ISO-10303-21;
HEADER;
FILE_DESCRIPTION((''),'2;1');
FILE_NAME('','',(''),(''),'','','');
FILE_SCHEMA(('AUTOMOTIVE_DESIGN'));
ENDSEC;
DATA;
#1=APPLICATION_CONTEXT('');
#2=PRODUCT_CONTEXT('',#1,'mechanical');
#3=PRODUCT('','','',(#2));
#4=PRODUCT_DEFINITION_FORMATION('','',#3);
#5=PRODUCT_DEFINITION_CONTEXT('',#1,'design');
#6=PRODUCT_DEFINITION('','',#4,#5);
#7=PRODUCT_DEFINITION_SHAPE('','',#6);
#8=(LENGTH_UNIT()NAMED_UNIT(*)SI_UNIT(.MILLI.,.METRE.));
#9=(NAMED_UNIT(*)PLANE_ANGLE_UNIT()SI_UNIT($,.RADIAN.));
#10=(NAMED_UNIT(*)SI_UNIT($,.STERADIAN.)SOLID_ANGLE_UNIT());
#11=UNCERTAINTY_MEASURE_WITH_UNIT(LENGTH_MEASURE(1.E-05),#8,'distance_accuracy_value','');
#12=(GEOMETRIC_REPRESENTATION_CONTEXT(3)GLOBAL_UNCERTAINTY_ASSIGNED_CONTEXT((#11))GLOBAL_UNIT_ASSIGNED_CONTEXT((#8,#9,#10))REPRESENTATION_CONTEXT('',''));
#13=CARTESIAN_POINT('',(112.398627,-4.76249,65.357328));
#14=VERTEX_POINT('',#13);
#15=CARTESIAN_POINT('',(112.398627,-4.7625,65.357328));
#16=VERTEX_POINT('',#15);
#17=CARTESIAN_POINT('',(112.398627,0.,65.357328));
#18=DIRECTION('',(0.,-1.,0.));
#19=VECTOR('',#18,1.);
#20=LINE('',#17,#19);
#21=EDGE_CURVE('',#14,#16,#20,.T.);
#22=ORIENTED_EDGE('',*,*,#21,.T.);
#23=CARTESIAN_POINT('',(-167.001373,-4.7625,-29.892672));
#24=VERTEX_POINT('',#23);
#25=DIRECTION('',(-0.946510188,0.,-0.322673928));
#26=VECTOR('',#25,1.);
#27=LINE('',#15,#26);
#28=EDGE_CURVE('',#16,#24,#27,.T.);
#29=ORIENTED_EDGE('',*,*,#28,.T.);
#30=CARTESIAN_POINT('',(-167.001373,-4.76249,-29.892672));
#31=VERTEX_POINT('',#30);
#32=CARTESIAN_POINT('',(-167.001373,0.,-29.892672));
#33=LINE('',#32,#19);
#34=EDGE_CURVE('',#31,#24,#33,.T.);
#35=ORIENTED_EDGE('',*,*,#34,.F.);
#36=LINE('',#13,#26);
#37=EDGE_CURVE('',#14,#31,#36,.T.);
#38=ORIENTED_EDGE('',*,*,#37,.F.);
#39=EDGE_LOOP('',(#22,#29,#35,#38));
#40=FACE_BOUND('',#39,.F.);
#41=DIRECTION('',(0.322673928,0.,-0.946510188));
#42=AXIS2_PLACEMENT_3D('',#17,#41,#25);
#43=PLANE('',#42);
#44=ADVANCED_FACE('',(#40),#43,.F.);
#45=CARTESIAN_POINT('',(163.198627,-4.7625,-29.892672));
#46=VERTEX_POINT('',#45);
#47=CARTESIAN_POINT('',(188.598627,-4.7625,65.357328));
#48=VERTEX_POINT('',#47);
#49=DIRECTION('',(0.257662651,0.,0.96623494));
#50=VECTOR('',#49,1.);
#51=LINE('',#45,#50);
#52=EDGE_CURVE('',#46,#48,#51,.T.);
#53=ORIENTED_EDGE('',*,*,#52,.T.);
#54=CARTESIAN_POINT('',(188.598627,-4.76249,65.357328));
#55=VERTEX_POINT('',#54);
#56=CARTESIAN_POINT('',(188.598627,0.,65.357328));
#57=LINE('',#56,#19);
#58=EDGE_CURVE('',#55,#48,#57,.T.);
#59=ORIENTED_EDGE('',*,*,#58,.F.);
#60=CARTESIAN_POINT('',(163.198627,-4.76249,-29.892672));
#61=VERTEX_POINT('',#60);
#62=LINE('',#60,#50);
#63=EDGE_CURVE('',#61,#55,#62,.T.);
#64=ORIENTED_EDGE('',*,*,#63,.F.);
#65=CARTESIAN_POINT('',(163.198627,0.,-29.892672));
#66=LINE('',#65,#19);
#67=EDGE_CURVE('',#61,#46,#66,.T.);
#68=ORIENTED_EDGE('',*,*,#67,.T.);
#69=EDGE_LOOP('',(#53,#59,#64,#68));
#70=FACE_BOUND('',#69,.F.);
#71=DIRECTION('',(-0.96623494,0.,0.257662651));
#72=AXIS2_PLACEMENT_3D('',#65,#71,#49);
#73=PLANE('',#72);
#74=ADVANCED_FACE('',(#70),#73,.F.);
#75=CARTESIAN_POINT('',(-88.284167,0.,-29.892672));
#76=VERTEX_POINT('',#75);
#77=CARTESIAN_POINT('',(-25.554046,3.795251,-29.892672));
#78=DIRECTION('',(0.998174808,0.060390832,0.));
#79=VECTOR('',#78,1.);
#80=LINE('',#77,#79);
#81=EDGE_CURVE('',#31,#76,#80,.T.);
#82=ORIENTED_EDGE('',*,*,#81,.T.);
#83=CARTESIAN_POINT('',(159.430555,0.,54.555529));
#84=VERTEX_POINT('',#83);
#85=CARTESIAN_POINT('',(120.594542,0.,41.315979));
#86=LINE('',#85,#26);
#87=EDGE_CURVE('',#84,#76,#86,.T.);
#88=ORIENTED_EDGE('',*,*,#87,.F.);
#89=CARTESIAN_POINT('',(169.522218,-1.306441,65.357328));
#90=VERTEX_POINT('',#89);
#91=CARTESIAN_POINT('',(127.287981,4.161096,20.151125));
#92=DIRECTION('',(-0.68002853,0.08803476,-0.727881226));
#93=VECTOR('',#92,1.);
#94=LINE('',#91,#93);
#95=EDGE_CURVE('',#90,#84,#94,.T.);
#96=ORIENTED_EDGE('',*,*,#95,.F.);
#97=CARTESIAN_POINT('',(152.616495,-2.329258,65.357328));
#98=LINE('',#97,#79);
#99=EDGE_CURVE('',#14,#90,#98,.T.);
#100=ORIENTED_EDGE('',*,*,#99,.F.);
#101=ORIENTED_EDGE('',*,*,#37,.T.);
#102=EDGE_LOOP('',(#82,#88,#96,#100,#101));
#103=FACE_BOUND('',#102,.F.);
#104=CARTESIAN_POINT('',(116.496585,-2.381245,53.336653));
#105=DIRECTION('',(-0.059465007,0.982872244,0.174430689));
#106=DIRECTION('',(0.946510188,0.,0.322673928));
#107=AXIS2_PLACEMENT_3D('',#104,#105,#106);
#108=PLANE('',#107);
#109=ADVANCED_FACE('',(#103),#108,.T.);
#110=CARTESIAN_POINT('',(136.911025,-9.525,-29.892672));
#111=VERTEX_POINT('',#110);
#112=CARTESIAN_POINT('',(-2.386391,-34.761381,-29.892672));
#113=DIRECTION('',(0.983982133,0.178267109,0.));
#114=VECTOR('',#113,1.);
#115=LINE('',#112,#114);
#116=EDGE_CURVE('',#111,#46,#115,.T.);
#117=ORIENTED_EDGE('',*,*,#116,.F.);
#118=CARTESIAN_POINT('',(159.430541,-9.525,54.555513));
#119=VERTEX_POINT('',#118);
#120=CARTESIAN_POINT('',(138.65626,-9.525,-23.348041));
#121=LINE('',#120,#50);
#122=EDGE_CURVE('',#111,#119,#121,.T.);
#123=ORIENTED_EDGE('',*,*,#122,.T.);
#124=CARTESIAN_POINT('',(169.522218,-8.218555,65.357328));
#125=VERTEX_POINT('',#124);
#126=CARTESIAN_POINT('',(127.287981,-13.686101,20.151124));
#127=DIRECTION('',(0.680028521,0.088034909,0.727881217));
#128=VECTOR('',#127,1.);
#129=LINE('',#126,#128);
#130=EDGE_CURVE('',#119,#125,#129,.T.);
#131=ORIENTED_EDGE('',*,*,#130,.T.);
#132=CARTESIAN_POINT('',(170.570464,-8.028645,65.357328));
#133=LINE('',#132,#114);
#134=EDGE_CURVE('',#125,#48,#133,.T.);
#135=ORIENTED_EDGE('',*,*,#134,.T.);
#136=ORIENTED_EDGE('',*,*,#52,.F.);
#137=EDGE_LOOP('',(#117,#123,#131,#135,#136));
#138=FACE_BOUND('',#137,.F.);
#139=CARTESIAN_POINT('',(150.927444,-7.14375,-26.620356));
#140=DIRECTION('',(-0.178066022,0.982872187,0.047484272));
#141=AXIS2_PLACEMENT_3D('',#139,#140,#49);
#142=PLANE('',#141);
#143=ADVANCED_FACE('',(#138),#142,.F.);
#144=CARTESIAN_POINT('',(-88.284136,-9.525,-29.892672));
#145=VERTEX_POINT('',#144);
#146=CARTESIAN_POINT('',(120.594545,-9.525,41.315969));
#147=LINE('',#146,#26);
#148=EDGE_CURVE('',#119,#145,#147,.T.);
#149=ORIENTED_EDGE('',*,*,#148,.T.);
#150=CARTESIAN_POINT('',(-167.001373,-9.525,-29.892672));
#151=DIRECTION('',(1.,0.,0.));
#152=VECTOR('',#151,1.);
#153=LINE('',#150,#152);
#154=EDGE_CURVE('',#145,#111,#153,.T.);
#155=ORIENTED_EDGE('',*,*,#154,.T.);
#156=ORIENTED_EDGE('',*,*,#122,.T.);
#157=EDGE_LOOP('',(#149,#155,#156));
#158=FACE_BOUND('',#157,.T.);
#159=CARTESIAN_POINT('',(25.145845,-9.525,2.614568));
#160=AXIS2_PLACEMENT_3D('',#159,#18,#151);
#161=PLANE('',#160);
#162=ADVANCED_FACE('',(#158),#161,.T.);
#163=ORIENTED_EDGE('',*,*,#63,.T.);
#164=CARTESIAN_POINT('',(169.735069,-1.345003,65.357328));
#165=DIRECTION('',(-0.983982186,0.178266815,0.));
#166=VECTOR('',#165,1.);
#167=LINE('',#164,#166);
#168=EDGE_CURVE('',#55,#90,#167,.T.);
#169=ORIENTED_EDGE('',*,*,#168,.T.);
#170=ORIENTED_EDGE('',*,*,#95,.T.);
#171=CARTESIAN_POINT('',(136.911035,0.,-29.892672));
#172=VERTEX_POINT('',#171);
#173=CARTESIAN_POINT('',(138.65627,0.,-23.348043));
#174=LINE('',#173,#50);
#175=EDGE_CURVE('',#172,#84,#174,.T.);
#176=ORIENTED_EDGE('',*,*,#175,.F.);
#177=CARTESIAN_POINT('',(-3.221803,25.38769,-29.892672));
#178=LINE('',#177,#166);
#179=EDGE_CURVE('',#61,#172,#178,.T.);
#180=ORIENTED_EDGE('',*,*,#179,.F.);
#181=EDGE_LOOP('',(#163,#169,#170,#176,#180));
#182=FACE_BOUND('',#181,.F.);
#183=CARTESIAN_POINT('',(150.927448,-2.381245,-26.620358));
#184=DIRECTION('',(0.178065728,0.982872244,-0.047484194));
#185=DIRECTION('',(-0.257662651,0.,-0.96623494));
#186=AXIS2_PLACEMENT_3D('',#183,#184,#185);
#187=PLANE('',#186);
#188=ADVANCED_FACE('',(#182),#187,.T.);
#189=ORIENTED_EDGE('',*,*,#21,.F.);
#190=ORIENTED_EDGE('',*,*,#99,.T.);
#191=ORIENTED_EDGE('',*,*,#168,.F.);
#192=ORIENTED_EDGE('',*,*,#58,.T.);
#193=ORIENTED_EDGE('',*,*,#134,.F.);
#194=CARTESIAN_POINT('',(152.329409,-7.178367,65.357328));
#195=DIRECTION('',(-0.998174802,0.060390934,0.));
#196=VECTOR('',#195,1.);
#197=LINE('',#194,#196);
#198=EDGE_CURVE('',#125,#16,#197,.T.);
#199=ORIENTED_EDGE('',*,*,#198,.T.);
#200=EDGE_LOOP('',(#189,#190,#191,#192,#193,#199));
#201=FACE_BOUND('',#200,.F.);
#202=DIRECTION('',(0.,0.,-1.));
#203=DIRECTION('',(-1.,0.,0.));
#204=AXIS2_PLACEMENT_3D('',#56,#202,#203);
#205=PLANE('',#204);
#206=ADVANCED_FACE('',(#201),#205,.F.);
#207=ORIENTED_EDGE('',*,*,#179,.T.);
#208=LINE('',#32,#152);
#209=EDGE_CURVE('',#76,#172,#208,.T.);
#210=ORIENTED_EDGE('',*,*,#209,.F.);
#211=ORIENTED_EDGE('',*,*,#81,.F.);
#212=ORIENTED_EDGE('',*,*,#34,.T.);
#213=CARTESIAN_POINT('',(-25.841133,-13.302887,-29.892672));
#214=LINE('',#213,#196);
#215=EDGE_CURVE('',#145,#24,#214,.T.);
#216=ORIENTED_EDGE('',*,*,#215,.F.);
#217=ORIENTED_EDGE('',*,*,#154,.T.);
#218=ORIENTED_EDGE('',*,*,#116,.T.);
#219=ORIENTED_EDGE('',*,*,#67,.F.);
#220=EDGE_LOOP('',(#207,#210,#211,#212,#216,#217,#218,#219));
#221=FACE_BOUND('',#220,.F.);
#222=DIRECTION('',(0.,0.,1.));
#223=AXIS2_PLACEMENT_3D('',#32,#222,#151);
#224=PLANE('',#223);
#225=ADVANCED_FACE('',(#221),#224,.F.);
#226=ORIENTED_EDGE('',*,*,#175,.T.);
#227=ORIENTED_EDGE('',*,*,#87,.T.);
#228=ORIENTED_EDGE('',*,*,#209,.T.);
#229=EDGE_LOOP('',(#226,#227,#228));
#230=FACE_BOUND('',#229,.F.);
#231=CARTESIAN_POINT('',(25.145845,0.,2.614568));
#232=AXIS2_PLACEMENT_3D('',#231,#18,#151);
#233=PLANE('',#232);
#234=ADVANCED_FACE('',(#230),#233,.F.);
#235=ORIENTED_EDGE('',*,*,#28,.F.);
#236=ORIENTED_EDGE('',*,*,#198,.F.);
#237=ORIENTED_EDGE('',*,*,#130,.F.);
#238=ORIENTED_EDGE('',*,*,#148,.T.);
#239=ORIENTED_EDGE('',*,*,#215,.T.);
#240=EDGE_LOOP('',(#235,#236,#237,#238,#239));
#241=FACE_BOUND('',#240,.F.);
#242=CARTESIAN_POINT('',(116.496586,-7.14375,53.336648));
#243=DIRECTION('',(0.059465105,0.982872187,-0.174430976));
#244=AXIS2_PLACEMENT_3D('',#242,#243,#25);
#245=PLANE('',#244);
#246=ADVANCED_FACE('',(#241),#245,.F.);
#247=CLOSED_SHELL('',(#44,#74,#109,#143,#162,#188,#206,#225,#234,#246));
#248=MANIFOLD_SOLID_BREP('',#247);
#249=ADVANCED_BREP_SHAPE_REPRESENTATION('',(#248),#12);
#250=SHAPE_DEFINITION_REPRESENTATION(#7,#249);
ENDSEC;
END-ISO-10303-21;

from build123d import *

# Parameters (mm, degrees)
F1_DEPTH = 9.525
F2_SIZE2 = 4.7625
F2_SIZE  = 25.4
F3_SIZE2 = 25.39999
F3_SIZE  = 4.76249
F4_SIZE2 = 4.7625
F4_SIZE  = 25.4
F5_SIZE2 = 25.39999
F5_SIZE  = 4.76249


# Not quite as in the source:
# - a fillet or chamfer is up to 0.001 mm smaller than in the source, because OpenCascade refuses the exact size


with BuildPart() as f1:
    # F0 (on Front) → F1 (new body)
    with BuildSketch(Plane.XZ):
        Polygon((112.3986273699, 65.3573278389), (-167.0013726301, -29.8926721611), (163.1986273699, -29.8926721611), (188.5986273699, 65.3573278389), align=None)
    extrude(amount=F1_DEPTH)

    # F2
    f2_edges = [f1.edges().sort_by_distance(p)[0] for p in [
        (-27.301373, -9.525, 17.732328),
    ]]
    f2_side = f1.faces().sort_by_distance((58.423627, -9.525, 7.810453))[0]
    chamfer(f2_edges, length=F2_SIZE, length2=F2_SIZE2, reference=f2_side)

    # F3 (size 4.7625 and 25.4 in the source; OpenCascade refuses exactly that, so slightly less here)
    f3_edges = [f1.edges().sort_by_distance(p)[0] for p in [
        (-27.301373, 0, 17.732328),
    ]]
    f3_side = f1.faces().sort_by_distance((-27.301373, -2.38125, 17.732328))[0]
    chamfer(f3_edges, length=F3_SIZE, length2=F3_SIZE2, reference=f3_side)

    # F4
    f4_edges = [f1.edges().sort_by_distance(p)[0] for p in [
        (175.772766, -9.525, 17.260346),
    ]]
    f4_side = f1.faces().sort_by_distance((87.753798, -9.525, 1.542673))[0]
    chamfer(f4_edges, length=F4_SIZE, length2=F4_SIZE2, reference=f4_side)

    # F5 (size 4.7625 and 25.4 in the source; OpenCascade refuses exactly that, so slightly less here)
    f5_edges = [f1.edges().sort_by_distance(p)[0] for p in [
        (175.772767, 0, 17.260352),
    ]]
    f5_side = f1.faces().sort_by_distance((175.896628, -2.381619, 17.72483))[0]
    chamfer(f5_edges, length=F5_SIZE, length2=F5_SIZE2, reference=f5_side)


solid = f1.part
